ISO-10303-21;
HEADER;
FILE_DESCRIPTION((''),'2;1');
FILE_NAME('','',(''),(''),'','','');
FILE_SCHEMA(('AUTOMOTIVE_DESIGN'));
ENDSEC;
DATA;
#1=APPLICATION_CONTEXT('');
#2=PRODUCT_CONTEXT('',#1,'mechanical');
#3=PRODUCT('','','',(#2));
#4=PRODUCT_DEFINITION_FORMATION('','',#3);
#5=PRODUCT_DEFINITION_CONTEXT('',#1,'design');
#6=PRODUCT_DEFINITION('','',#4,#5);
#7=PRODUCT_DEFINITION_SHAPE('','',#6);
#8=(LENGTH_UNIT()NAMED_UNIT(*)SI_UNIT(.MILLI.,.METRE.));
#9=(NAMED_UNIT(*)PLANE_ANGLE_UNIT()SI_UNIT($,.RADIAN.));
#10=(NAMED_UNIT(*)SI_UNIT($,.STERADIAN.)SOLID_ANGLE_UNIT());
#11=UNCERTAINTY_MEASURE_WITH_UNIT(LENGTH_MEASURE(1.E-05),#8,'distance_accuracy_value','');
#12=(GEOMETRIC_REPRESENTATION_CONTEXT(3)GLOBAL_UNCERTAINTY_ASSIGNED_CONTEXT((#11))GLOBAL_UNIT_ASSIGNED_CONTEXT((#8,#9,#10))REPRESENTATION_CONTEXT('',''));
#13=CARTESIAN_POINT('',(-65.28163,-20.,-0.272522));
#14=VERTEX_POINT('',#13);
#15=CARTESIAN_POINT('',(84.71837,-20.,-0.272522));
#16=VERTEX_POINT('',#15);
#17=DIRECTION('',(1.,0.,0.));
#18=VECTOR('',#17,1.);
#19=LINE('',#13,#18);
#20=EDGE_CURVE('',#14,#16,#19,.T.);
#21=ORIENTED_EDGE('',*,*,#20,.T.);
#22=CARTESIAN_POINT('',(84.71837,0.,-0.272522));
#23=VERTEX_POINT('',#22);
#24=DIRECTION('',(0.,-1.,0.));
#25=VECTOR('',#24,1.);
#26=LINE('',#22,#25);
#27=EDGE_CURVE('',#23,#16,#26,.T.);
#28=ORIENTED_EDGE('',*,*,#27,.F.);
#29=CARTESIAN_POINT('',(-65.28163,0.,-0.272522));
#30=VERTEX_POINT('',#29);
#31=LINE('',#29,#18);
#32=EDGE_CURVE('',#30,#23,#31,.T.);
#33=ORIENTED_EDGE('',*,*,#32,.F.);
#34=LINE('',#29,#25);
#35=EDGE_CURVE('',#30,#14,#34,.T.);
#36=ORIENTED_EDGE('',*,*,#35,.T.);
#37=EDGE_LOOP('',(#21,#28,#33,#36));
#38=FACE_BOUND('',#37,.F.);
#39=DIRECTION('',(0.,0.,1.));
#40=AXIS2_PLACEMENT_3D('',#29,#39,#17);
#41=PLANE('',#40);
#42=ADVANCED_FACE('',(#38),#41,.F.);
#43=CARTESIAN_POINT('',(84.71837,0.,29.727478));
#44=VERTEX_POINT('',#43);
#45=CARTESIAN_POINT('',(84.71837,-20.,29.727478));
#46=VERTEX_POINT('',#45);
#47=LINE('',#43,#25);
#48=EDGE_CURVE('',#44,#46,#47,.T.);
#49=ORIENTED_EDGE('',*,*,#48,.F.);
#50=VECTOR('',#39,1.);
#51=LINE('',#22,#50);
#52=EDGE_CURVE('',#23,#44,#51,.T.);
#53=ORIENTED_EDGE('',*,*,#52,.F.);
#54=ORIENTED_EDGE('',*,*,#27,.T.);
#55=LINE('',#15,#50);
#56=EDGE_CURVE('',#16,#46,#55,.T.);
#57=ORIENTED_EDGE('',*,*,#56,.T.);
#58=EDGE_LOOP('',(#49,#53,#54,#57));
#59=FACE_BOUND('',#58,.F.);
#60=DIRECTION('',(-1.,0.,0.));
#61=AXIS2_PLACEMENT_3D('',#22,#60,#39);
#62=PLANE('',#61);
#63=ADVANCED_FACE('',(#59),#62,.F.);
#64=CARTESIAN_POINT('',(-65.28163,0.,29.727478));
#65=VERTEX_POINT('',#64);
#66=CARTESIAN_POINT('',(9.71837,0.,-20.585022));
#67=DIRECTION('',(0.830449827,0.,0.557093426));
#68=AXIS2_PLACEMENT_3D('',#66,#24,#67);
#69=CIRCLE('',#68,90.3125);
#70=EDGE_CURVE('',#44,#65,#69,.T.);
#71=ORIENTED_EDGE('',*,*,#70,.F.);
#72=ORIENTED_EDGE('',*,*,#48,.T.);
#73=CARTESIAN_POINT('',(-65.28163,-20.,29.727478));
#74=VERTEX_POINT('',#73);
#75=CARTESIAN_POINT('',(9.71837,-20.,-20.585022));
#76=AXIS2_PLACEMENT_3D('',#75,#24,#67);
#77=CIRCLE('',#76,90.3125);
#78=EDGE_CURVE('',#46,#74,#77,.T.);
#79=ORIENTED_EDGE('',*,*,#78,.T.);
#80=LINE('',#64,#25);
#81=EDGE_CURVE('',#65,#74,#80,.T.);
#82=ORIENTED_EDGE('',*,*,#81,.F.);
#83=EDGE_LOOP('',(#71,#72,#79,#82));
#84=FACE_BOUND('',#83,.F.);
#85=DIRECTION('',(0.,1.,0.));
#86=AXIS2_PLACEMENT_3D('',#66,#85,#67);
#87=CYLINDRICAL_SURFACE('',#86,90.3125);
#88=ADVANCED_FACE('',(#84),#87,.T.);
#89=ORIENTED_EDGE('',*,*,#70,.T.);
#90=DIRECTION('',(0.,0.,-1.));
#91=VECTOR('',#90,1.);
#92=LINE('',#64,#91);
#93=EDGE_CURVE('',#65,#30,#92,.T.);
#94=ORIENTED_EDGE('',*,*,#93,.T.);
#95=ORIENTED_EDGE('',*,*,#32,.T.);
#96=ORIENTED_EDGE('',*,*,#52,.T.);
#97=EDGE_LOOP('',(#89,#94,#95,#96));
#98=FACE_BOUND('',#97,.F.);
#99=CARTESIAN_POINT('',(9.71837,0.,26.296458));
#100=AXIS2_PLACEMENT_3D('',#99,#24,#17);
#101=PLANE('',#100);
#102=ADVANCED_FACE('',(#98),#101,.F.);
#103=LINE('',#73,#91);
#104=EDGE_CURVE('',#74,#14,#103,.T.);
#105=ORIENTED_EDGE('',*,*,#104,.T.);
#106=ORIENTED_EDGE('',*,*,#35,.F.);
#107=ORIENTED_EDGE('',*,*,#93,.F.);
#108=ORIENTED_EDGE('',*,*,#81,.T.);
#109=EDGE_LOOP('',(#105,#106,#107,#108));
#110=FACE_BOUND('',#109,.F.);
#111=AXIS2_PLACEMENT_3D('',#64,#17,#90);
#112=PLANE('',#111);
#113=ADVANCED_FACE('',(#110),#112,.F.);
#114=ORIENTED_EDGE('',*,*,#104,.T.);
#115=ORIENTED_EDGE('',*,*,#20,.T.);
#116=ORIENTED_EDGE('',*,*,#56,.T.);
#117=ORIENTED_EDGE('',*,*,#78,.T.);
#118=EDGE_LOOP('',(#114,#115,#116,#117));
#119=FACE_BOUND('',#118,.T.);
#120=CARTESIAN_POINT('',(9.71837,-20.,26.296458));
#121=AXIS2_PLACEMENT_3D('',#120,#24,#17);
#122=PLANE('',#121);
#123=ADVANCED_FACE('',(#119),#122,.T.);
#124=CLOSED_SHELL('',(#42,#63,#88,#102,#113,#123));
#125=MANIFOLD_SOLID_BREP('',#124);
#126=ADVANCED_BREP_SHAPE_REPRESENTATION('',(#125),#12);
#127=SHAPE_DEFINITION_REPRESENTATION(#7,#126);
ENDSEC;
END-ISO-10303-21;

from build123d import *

# Parameters (mm, degrees)
F1_DEPTH = 20


# Not quite as in the source:
# - a feature names something its author has since deleted; it is built from what else it names


with BuildPart() as f1:
    # F0 (on Front) → F1 (new body)
    with BuildSketch(Plane.XZ):
        with BuildLine():
            ThreePointArc((84.7183704376, 29.7274781391), (9.7183704376, 69.7274781391), (-65.2816295624, 29.7274781391))
            Line((-65.2816295624, 29.7274781391), (-65.2816295624, -0.2725218609))
            Line((-65.2816295624, -0.2725218609), (84.7183704376, -0.2725218609))
            Line((84.7183704376, -0.2725218609), (84.7183704376, 29.7274781391))
        make_face()
    extrude(amount=F1_DEPTH)


solid = f1.part
